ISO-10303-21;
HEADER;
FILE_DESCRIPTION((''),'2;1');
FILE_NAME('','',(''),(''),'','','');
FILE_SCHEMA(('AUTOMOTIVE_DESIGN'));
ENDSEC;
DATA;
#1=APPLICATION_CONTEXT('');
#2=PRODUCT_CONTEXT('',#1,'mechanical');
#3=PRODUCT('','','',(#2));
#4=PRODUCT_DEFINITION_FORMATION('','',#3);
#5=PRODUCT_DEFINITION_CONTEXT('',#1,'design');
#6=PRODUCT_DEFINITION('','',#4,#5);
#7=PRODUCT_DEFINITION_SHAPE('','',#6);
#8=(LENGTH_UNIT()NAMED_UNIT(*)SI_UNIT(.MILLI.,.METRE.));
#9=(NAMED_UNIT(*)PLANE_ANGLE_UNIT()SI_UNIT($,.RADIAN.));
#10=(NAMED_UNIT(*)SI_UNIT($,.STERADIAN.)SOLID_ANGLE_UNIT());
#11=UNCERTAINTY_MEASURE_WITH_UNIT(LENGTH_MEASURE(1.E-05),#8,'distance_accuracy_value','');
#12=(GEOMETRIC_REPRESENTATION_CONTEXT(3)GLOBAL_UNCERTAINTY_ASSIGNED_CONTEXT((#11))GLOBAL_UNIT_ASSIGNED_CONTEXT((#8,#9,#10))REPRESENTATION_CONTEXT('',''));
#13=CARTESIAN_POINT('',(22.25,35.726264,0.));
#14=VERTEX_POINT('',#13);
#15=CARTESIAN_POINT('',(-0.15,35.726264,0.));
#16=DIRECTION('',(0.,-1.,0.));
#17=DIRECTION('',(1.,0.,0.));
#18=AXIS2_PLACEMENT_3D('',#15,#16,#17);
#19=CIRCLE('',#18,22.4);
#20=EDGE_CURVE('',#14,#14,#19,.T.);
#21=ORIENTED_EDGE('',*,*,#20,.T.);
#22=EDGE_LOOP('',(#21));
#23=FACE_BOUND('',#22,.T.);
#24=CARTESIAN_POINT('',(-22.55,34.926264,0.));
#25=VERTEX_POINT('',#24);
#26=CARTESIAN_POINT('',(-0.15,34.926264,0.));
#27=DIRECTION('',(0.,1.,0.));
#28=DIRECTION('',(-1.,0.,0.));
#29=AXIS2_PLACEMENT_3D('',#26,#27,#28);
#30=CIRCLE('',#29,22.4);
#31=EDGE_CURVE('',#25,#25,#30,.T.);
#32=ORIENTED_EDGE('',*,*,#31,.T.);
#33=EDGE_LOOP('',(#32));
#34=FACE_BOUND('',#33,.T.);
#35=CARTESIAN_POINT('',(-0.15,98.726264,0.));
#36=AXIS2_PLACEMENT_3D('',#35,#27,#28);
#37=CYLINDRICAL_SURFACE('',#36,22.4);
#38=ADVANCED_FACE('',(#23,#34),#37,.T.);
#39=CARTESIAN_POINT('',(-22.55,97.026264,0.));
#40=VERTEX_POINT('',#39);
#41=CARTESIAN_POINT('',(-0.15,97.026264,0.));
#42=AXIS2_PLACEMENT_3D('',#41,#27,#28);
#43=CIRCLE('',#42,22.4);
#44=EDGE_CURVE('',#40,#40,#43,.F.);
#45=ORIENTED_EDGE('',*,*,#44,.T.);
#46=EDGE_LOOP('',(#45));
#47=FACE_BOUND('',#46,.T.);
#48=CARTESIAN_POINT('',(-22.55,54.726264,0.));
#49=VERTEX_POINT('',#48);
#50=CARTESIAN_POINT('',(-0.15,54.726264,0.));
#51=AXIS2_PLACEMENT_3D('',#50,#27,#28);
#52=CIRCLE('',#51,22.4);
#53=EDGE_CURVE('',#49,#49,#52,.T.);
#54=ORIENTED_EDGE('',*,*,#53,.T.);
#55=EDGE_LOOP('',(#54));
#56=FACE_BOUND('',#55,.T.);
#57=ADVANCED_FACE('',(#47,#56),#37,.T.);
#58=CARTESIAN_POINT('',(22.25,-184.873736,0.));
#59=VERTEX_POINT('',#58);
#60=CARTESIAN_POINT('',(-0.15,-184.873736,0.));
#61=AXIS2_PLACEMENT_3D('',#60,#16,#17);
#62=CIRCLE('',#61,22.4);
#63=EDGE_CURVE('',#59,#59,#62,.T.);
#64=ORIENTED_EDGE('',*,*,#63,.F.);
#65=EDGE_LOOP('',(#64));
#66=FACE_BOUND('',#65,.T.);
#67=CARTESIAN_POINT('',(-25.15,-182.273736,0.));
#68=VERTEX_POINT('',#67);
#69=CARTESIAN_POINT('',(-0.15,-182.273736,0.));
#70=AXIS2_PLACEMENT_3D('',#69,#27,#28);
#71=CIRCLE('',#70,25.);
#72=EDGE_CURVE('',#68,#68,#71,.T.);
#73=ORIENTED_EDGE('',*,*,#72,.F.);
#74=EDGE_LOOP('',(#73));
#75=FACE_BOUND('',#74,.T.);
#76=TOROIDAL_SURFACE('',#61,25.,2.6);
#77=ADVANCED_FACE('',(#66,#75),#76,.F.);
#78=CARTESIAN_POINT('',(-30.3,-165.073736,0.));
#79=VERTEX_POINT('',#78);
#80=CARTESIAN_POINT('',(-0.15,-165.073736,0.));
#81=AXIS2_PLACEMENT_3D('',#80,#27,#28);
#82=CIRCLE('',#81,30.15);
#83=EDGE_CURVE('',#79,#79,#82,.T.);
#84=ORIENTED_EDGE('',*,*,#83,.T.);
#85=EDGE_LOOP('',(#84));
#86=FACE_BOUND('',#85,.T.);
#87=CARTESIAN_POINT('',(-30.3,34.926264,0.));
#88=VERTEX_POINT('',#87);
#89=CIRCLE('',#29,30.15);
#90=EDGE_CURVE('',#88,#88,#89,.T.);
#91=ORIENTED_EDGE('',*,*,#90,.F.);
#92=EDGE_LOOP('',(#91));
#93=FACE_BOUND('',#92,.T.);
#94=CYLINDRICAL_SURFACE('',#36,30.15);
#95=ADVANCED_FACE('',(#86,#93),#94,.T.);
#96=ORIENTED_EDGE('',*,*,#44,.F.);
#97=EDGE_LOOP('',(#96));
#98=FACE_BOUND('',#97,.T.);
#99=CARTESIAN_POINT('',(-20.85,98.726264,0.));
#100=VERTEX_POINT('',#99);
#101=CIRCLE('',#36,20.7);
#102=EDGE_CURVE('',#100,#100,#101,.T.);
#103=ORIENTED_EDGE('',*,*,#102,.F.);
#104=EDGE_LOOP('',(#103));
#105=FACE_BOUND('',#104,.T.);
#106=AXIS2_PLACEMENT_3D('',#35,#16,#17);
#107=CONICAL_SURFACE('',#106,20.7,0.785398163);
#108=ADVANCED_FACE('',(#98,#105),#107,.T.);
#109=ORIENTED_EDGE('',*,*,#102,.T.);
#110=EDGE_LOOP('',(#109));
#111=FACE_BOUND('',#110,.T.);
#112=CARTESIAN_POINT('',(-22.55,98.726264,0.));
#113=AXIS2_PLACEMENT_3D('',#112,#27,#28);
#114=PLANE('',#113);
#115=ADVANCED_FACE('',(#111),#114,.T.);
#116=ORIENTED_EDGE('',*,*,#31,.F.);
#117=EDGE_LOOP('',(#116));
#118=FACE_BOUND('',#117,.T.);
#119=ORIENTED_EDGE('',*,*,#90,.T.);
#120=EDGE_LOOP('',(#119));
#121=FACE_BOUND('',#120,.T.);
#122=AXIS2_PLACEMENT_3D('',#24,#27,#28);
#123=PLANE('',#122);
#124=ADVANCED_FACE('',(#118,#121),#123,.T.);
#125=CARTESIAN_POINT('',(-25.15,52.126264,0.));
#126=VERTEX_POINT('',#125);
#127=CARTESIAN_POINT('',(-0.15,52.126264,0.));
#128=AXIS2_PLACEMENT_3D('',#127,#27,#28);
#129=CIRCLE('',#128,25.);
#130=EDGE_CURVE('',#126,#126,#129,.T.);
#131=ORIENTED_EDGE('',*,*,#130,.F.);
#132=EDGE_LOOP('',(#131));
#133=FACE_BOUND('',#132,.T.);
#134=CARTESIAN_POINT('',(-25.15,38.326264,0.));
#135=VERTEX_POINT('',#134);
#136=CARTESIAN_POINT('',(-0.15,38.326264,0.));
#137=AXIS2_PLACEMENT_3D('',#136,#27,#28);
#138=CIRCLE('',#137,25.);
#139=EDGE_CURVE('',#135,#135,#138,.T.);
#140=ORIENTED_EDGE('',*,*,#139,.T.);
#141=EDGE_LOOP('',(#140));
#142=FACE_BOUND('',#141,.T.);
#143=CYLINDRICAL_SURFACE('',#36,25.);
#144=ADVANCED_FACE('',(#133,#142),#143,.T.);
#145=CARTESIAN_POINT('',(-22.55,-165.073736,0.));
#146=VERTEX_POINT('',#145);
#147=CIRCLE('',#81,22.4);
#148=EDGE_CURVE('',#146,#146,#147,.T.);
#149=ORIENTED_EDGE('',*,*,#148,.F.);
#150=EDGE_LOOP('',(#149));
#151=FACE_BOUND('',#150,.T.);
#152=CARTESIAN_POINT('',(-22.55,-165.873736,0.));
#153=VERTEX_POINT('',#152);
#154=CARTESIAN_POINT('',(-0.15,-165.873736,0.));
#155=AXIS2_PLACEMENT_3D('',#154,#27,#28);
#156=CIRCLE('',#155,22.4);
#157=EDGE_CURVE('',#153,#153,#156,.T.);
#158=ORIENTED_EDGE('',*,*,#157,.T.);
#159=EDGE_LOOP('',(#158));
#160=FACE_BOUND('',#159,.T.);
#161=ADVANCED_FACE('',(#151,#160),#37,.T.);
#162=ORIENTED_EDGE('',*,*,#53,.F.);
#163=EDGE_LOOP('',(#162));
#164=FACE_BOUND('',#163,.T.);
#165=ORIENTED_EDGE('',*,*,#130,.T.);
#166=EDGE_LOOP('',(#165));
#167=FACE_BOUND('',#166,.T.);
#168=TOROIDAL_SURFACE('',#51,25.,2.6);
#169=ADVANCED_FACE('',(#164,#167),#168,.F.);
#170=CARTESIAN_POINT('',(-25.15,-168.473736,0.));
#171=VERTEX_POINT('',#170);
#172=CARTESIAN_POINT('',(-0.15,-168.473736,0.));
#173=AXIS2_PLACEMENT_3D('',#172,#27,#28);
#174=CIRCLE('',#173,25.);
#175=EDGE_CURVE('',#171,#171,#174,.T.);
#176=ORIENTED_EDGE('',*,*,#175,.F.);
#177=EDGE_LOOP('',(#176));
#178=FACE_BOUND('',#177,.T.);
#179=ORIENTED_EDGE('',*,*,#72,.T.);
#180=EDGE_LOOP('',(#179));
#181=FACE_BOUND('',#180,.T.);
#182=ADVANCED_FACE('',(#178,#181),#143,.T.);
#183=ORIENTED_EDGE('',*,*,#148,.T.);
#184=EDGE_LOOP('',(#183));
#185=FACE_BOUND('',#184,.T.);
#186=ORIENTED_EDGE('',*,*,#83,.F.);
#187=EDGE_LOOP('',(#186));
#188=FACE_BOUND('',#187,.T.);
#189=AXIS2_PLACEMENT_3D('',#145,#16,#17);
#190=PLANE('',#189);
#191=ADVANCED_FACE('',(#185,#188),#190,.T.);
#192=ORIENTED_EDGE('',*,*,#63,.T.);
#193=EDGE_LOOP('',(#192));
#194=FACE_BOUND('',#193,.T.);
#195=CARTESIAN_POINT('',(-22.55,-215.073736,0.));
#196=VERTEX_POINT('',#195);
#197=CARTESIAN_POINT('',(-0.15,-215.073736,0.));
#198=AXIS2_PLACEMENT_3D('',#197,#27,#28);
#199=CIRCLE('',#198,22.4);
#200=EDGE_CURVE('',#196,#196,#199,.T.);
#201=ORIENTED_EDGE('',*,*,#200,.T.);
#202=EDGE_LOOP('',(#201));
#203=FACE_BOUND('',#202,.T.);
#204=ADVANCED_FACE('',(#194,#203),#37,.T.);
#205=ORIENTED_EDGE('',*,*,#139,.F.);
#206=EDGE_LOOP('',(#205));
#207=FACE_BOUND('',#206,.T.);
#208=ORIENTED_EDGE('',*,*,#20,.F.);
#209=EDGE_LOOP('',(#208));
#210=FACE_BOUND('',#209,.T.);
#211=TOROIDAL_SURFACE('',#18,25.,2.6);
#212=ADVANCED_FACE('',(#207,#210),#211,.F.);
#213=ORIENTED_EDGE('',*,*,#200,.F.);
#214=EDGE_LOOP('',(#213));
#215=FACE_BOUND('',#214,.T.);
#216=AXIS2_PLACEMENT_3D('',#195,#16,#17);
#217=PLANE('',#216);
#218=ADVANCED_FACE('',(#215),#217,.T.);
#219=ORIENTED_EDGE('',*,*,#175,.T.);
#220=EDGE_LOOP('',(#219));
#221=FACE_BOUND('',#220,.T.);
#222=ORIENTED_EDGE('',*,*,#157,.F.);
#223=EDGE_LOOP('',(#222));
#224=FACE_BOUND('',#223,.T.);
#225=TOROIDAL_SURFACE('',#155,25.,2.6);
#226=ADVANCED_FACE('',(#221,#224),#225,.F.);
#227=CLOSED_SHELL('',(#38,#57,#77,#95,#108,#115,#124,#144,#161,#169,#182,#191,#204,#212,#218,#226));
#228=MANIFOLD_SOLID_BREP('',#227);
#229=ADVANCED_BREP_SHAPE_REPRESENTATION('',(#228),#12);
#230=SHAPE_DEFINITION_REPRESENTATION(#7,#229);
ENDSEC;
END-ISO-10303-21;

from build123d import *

# Parameters (mm, degrees)
CHAMFER1_SIZE = 1.7
FILLET4_R     = 2.6
FILLET7_R     = 2.6
FILLET8_R     = 2.6
FILLET9_R     = 2.6


with BuildPart() as part:
    # Sketch1 → Revolve3 (revolve)
    with BuildSketch(Plane.XY):
        Polygon((-22.55, 98.726264023), (-0.15, 98.726264023), (-0.15, -215.073735977), (-22.55, -215.073735977), (-22.55, -182.273735977), (-25.15, -182.273735977), (-25.15, -168.473735977), (-22.55, -168.473735977), (-22.55, -165.073735977), (-30.3, -165.073735977), (-30.3, 34.926264023), (-22.55, 34.926264023), (-22.55, 38.326264023), (-25.15, 38.326264023), (-25.15, 52.126264023), (-22.55, 52.126264023), align=None)
    revolve(axis=Axis((-0.15, 98.726264023, 0), (0, -1, 0)))

    # Chamfer1
    chamfer1_edges = [part.edges().sort_by_distance(p)[0] for p in [
        (22.25, 98.726264023, 0),
    ]]
    chamfer(chamfer1_edges, length=CHAMFER1_SIZE)

    # Fillet4
    fillet4_edges = [part.edges().sort_by_distance(p)[0] for p in [
        (22.25, 52.126264023, 0),
    ]]
    fillet(fillet4_edges, radius=FILLET4_R - 0.0001)  # a hair under: the kernel refuses the full size

    # Fillet7
    fillet7_edges = [part.edges().sort_by_distance(p)[0] for p in [
        (22.25, 38.326264023, 0),
    ]]
    fillet(fillet7_edges, radius=FILLET7_R - 0.0001)  # a hair under: the kernel refuses the full size

    # Fillet8
    fillet8_edges = [part.edges().sort_by_distance(p)[0] for p in [
        (22.25, -182.273735977, 0),
    ]]
    fillet(fillet8_edges, radius=FILLET8_R - 0.0001)  # a hair under: the kernel refuses the full size

    # Fillet9
    fillet9_edges = [part.edges().sort_by_distance(p)[0] for p in [
        (22.25, -168.473735977, 0),
    ]]
    fillet(fillet9_edges, radius=FILLET9_R - 0.0001)  # a hair under: the kernel refuses the full size


solid = part.part
